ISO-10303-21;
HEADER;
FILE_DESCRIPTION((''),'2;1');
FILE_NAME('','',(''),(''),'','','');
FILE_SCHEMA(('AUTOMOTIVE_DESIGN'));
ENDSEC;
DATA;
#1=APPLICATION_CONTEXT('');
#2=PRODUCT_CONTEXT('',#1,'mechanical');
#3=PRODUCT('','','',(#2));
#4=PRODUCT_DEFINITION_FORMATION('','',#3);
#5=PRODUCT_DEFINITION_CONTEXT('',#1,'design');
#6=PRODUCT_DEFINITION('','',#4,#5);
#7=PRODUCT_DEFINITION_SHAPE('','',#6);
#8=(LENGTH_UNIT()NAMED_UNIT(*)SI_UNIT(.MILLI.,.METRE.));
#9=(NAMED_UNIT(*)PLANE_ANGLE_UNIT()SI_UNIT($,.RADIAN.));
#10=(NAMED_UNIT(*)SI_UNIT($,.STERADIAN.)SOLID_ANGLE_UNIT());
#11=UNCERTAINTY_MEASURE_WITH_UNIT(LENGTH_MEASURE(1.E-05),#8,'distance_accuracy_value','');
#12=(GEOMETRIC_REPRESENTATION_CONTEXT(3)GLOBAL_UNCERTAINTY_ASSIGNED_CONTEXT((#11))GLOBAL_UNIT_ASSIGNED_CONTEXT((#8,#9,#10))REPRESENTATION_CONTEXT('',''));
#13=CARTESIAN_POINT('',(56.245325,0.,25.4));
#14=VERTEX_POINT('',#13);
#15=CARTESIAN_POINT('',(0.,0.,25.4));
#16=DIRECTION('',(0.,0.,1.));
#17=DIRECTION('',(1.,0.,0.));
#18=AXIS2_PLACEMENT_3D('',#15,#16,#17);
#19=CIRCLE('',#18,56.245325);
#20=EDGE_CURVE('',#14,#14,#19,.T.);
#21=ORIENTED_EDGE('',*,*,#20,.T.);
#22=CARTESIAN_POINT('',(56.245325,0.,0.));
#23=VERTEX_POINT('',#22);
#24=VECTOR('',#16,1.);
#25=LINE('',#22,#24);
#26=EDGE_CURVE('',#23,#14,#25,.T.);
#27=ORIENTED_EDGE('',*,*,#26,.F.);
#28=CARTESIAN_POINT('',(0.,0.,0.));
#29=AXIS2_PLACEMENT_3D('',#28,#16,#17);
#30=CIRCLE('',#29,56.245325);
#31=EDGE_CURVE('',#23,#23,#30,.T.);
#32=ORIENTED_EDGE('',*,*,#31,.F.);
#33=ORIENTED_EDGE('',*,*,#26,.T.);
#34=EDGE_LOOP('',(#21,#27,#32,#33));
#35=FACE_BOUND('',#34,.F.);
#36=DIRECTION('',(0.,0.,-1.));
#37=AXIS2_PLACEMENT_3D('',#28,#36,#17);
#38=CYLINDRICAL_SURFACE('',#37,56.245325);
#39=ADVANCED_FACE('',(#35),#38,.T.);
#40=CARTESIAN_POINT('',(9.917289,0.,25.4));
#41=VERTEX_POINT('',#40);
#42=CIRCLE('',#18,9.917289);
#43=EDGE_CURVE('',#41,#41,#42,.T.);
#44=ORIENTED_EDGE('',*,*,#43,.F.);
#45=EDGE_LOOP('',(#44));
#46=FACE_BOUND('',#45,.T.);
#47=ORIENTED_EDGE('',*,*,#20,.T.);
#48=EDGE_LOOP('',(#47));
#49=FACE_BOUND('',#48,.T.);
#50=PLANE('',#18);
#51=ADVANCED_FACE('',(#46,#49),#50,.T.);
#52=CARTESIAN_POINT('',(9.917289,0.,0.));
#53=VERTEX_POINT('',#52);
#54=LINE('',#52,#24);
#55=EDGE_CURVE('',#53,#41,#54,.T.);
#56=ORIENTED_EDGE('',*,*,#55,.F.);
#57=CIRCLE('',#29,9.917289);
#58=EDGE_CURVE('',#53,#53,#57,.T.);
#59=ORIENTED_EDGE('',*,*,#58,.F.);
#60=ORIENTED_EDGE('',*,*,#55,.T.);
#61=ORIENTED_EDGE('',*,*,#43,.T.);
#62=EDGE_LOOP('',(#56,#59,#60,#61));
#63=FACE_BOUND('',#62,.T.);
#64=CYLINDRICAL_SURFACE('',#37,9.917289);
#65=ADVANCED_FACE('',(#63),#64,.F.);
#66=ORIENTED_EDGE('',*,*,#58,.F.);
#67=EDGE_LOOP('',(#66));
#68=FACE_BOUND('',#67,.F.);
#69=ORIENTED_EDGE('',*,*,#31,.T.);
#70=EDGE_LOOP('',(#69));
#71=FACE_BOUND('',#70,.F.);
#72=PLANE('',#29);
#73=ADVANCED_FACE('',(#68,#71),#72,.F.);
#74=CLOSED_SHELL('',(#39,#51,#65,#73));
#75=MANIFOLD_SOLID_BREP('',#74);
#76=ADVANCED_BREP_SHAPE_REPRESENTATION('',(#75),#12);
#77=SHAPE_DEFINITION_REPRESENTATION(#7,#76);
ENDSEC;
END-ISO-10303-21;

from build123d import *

# Parameters (mm, degrees)
F0_R          = 56.2453252519
F1_DEPTH      = 25.4
F2_R          = 9.9172889071
F3_DEPTH      = 174
F3_DEPTH_BACK = 25.4


# Not quite as in the source:
# - an extrude ends at something that could not be found from the text; its depth is read off the source's solid


with BuildPart() as f1:
    # F0 (on Top) → F1 (new body)
    with BuildSketch(Plane.XY):
        Circle(F0_R)
    extrude(amount=F1_DEPTH)

    # F2 (on Top) → F3 (cut, two sides)
    with BuildSketch(Plane.XY) as f3_sk:
        Circle(F2_R)
    extrude(amount=-F3_DEPTH, mode=Mode.SUBTRACT)
    extrude(f3_sk.sketch, amount=F3_DEPTH_BACK, mode=Mode.SUBTRACT)


solid = f1.part
